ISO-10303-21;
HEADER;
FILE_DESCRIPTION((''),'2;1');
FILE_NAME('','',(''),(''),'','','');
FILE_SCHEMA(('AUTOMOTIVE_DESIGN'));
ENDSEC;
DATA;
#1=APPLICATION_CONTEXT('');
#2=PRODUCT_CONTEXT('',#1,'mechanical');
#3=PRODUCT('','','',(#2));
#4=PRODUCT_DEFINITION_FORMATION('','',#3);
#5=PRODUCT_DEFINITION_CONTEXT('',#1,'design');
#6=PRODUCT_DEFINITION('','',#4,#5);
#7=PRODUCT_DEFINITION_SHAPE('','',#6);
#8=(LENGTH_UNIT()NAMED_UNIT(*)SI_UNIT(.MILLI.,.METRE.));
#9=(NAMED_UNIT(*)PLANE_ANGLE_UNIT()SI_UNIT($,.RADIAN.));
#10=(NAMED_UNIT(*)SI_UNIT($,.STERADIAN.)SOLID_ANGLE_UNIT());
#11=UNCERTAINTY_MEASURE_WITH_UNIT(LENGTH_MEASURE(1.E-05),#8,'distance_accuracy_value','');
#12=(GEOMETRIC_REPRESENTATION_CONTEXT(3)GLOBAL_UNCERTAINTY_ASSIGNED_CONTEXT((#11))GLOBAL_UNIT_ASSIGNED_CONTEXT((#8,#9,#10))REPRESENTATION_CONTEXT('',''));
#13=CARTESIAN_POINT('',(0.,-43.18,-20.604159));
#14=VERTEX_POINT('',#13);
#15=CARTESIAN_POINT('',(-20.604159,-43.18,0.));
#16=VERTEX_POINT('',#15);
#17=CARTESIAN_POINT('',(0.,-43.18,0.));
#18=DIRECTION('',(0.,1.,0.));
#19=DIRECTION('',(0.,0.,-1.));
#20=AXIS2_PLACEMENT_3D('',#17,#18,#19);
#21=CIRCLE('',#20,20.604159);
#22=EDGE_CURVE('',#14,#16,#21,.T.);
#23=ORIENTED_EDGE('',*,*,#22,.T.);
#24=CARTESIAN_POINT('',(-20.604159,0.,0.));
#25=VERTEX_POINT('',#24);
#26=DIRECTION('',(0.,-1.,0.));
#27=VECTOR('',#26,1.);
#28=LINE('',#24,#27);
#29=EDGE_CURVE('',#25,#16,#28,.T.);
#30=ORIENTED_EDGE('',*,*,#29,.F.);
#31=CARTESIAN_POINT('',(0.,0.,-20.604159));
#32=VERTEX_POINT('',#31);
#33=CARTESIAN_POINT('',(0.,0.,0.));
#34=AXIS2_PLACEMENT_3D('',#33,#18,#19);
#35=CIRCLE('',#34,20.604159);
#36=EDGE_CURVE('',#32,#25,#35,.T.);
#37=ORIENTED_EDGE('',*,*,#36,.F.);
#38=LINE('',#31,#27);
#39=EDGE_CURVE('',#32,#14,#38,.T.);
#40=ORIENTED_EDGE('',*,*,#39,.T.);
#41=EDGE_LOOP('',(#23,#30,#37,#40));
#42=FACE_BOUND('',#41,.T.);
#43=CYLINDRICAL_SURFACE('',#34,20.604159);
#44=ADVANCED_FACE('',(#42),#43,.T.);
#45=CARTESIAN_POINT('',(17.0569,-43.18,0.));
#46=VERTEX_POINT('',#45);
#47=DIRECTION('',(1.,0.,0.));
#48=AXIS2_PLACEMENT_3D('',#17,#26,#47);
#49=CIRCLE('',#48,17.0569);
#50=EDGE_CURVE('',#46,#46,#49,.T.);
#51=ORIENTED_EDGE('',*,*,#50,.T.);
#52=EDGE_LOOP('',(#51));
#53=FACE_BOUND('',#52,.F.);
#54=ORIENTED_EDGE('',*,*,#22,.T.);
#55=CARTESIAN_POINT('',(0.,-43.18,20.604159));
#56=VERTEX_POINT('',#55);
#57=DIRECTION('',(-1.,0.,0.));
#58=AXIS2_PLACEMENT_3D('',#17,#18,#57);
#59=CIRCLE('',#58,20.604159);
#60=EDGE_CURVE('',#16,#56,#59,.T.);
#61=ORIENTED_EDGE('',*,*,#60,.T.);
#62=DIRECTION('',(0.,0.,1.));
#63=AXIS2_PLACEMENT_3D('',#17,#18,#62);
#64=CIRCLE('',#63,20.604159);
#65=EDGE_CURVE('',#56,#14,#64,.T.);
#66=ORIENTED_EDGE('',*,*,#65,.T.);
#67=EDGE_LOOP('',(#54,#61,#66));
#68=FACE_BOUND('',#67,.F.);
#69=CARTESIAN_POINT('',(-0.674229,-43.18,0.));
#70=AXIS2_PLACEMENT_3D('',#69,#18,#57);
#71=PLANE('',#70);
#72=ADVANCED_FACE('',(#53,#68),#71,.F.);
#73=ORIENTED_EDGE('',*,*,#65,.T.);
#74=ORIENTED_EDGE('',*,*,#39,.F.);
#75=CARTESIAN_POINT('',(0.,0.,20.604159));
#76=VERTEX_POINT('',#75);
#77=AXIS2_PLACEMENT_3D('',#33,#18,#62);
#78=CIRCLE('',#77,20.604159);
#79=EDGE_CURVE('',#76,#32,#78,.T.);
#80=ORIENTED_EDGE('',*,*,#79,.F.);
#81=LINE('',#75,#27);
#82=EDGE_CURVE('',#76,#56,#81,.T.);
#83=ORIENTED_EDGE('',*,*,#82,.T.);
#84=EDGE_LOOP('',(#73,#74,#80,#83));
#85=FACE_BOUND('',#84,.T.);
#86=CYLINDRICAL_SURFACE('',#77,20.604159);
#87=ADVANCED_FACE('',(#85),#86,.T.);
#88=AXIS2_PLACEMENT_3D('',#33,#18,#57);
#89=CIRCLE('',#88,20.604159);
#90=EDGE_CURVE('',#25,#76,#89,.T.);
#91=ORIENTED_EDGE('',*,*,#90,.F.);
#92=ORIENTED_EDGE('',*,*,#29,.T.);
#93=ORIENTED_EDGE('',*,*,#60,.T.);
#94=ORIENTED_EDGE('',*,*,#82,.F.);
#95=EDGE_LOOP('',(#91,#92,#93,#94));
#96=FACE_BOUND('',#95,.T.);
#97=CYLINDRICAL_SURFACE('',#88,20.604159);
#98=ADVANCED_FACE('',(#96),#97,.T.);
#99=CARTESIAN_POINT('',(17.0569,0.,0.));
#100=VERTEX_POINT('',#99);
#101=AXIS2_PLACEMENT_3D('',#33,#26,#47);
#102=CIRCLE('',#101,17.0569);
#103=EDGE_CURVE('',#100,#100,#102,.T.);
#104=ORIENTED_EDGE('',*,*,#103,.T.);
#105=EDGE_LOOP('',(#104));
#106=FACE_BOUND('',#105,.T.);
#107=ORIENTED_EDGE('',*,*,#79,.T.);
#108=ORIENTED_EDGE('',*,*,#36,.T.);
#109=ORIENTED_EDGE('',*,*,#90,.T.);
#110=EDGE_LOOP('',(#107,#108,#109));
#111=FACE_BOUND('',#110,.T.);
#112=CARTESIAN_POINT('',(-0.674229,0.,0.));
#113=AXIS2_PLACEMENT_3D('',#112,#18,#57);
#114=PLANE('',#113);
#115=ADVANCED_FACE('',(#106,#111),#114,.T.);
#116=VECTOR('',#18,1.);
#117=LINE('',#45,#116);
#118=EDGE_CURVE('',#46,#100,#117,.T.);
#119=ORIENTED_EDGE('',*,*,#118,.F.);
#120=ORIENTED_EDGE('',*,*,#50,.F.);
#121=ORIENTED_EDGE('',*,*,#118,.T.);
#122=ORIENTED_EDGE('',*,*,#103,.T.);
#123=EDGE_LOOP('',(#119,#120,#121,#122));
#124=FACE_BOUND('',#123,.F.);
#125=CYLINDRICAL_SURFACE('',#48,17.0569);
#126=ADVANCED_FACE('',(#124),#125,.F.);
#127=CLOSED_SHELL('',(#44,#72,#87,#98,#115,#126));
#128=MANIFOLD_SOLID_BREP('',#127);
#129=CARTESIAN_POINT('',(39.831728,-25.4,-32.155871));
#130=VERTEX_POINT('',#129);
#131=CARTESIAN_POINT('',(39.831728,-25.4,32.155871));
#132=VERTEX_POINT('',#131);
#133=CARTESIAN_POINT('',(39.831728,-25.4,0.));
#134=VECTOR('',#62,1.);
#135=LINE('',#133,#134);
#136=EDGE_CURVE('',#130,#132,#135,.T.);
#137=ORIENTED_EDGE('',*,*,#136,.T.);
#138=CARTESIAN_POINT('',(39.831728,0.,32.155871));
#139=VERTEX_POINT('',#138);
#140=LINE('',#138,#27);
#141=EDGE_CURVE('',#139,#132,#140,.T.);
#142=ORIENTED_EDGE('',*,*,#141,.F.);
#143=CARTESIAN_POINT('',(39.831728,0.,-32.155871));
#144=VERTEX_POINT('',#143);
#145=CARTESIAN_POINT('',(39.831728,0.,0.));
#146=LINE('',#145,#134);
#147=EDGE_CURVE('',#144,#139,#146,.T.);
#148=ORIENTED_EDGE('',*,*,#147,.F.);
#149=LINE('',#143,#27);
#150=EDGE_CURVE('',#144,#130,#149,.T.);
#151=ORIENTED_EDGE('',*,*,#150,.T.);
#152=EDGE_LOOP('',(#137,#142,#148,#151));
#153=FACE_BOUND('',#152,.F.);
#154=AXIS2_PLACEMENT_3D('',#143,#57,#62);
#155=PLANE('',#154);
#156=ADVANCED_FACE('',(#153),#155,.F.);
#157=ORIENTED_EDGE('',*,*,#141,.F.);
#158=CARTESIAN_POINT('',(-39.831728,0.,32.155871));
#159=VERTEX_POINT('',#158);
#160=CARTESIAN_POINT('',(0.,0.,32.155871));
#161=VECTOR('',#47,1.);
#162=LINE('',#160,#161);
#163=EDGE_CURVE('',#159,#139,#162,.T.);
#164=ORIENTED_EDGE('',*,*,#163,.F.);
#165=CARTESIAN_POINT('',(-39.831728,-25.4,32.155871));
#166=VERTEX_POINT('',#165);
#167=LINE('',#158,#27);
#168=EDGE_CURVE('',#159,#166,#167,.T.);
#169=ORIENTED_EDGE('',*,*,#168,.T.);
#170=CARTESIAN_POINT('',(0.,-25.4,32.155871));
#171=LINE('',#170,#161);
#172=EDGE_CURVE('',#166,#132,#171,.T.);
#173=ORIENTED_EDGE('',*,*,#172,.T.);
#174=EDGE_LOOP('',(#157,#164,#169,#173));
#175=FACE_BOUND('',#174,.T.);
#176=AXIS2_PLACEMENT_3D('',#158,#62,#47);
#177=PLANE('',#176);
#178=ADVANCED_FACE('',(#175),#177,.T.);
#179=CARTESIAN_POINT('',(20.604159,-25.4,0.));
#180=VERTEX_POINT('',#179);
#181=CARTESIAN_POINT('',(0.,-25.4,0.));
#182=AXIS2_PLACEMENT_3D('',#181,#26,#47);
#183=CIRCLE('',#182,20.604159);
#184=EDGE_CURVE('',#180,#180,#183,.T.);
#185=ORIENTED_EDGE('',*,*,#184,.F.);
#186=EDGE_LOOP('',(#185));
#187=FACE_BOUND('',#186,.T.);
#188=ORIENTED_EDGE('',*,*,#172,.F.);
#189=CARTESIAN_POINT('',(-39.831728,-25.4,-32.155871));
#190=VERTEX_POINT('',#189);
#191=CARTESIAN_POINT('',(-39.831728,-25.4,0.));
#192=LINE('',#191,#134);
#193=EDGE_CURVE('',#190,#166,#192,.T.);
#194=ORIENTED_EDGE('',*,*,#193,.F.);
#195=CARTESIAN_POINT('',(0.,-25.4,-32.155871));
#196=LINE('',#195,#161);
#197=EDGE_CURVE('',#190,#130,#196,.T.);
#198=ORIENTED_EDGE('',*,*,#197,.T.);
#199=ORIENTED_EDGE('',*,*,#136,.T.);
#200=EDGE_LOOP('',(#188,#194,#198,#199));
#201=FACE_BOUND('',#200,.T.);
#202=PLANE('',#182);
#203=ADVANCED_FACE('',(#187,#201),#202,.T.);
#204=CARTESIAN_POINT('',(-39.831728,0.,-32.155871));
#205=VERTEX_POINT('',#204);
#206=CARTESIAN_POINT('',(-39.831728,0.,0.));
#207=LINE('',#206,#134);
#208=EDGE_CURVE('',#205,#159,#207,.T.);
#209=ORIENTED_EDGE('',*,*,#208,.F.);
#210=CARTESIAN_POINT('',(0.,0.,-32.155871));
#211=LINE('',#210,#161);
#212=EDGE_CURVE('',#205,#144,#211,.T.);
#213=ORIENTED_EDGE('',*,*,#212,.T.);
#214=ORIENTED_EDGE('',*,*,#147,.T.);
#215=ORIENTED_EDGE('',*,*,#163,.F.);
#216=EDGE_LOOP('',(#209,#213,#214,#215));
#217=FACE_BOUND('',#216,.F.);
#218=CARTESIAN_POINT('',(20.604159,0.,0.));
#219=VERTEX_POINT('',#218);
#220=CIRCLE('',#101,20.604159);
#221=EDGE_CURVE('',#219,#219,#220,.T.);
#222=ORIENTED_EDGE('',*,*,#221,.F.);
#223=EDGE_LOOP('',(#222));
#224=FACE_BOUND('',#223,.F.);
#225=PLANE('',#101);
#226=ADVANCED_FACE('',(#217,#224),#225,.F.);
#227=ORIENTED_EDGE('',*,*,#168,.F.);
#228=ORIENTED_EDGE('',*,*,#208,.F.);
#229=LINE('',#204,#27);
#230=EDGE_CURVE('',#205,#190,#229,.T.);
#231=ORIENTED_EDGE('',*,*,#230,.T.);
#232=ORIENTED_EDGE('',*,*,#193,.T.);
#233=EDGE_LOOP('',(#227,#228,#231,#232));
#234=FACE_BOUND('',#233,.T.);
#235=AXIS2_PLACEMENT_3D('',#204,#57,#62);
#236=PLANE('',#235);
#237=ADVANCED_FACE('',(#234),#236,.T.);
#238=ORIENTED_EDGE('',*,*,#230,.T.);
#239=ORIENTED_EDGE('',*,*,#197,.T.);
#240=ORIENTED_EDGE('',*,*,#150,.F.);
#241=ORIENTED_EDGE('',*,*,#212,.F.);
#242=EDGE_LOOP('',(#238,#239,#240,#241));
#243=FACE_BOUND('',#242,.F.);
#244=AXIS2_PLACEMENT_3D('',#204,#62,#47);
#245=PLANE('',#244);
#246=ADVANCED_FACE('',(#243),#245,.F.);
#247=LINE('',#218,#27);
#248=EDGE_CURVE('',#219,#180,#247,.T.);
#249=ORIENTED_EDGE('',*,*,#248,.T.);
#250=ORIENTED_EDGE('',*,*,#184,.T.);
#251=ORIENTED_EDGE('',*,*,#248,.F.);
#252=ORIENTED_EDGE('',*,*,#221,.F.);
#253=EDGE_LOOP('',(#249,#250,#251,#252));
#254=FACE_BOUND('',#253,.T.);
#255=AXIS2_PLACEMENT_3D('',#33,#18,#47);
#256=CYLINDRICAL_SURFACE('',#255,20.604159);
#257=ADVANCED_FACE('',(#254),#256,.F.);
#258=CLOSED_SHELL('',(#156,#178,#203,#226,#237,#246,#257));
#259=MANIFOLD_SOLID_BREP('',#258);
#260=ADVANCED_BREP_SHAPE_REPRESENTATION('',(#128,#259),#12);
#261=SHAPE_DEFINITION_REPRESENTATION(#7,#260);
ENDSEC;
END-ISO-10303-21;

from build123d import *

# Parameters (mm, degrees)
F0_W     = 79.6634554863
F0_H     = 64.3117427826
F0_R     = 20.6041591681
F1_DEPTH = 25.4
F3_DEPTH = 43.18
F4_R     = 17.0569002262
F5_DEPTH = 50.8


with BuildPart() as f1:
    # F0 (on Front) → F1 (new body)
    with BuildSketch(Plane.XZ):
        Rectangle(F0_W, F0_H)
        Circle(F0_R, mode=Mode.SUBTRACT)
    extrude(amount=F1_DEPTH)


with BuildPart() as f3:
    # F2 (on face) → F3 (new body)
    with BuildSketch(Plane(origin=(0, 0, 0), x_dir=(-1, 0, 0), z_dir=(0, 1, 0))):
        with BuildLine():
            ThreePointArc((0, -20.6041591681), (14.5693406684, -14.5693406684), (20.6041591681, 0))
            ThreePointArc((20.6041591681, 0), (14.5693406684, 14.5693406684), (0, 20.6041591681))
            ThreePointArc((0, 20.6041591681), (-20.6041591681, 0), (0, -20.6041591681))
        make_face()
    extrude(amount=-F3_DEPTH)

    # F4 (on face) → F5 (cut)
    with BuildSketch(Plane.XZ.offset(43.18)):
        Circle(F4_R)
    extrude(amount=-F5_DEPTH, mode=Mode.SUBTRACT)


solid = Compound([f1.part, f3.part])
